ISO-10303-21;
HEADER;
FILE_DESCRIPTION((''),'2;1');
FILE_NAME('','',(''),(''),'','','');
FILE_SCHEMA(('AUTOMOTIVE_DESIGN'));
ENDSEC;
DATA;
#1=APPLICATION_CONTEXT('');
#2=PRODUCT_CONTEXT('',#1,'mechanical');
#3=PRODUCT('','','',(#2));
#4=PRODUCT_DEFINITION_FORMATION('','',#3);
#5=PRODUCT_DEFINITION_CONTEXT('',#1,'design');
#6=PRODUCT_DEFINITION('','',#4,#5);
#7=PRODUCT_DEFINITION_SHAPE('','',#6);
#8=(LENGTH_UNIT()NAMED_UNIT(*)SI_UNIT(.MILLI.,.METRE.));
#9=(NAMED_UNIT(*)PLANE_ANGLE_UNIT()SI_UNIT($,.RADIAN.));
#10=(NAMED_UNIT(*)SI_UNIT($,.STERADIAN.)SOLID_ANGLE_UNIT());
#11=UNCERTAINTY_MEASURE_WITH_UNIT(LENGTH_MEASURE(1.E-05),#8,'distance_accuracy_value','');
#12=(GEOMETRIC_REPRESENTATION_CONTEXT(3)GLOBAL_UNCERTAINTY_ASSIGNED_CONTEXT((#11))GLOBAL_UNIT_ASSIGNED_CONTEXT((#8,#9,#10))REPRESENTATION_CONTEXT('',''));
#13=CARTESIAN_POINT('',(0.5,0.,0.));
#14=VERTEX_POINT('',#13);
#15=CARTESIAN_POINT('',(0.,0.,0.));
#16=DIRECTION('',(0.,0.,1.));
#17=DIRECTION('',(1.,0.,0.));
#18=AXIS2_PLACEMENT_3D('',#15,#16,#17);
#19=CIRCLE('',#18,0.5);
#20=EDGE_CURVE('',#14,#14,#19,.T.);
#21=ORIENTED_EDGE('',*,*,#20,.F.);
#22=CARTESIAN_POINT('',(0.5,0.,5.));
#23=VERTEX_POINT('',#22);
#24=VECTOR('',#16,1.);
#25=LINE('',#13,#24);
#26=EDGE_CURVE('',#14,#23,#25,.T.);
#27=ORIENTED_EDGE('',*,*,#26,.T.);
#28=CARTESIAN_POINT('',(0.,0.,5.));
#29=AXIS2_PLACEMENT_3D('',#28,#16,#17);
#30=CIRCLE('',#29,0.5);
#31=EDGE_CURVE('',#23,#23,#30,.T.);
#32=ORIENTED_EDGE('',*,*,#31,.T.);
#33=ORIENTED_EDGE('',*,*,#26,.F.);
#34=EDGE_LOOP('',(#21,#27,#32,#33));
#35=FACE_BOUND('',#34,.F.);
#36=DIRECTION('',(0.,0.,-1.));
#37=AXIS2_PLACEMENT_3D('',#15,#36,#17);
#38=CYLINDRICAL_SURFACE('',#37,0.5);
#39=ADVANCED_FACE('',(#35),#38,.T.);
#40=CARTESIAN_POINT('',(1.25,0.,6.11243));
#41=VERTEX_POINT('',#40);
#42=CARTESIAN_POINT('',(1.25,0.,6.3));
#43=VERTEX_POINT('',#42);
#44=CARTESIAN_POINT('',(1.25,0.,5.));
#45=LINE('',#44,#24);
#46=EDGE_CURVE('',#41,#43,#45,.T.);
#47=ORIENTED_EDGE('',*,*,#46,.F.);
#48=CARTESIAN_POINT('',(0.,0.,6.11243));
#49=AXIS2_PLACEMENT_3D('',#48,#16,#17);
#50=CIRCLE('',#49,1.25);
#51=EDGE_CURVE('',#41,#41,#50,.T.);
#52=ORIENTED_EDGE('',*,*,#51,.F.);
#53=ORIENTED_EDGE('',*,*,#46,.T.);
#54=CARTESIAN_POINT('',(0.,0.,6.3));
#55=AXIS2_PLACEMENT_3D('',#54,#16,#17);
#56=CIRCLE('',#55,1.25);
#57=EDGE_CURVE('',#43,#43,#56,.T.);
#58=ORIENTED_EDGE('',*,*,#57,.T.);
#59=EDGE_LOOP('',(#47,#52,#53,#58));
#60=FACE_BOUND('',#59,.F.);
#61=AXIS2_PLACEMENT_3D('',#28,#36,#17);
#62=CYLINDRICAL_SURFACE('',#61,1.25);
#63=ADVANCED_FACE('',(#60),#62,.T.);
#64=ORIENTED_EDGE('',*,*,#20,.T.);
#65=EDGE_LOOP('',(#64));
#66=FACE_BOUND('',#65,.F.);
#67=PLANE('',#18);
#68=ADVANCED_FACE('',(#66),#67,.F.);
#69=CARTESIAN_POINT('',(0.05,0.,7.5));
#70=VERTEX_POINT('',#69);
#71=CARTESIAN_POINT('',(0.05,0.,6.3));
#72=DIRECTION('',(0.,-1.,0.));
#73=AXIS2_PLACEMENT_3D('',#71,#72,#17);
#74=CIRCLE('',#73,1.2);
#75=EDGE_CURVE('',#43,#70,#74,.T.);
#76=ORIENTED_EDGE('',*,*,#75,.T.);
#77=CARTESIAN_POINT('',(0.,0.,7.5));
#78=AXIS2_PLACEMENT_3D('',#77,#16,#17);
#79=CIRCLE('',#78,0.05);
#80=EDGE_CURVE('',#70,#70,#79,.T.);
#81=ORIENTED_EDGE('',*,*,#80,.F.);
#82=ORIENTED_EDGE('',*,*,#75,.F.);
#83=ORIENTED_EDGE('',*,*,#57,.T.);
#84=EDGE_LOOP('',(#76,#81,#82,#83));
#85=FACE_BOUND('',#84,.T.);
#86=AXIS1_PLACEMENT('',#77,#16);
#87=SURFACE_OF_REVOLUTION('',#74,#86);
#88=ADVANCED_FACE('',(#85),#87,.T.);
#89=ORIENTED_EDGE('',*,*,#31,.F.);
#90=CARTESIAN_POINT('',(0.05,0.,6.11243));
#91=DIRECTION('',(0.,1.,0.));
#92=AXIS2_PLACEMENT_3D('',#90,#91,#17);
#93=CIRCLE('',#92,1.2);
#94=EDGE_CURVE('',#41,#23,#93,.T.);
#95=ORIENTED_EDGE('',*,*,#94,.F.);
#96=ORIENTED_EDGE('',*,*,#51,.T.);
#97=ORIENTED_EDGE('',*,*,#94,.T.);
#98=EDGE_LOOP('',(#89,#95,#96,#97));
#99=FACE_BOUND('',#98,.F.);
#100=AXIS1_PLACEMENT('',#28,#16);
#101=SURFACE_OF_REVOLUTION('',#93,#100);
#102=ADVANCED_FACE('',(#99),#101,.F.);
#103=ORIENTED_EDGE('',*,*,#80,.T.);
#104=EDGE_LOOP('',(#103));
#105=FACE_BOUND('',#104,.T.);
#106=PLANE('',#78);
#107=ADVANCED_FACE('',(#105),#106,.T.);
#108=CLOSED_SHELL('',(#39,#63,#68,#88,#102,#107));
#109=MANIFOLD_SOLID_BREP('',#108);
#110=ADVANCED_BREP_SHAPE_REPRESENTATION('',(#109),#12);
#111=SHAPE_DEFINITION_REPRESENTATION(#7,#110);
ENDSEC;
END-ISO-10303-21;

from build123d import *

# Parameters (mm, degrees)
F0_R     = 0.5
F1_DEPTH = 5
F2_R     = 1.25
F3_DEPTH = 2.5


# Not quite as in the source:
# - a fillet or chamfer that OpenCascade refuses, or shapes differently, is made with other operations: its cross-section is extruded or revolved along the edge and cut away or added


with BuildPart() as f1:
    # F0 (on Top) → F1 (new body)
    with BuildSketch(Plane.XY):
        Circle(F0_R)
    extrude(amount=F1_DEPTH)

    # F2 (on face) → F3 (join)
    with BuildSketch(Plane.XY.offset(5)):
        Circle(F2_R)
    extrude(amount=F3_DEPTH)

    # F4: fillet of radius 1.2 on 2 edges, made by hand

    # F4_s1 → F4_t2 (revolve, cut)
    with BuildSketch(Plane.XZ):
        with BuildLine():
            ThreePointArc((1.25, 6.3), (0.8985281374, 7.1485281374), (0.05, 7.5))
            Line((0.05, 7.5), (1.25, 7.5))
            Line((1.25, 7.5), (1.25, 6.3))
        make_face()
    revolve(axis=Axis((0, 0, 7.5), (0, 0, 1)), mode=Mode.SUBTRACT)

    # F4_s3 → F4_t4 (revolve, cut)
    with BuildSketch(Plane.XZ):
        with BuildLine():
            ThreePointArc((1.25, 6.1124297731), (1.0449874371, 5.4416093798), (0.5, 5))
            Line((0.5, 5), (1.25, 5))
            Line((1.25, 5), (1.25, 6.1124297731))
        make_face()
    revolve(axis=Axis((0, 0, 5), (0, 0, 1)), mode=Mode.SUBTRACT)


solid = f1.part
